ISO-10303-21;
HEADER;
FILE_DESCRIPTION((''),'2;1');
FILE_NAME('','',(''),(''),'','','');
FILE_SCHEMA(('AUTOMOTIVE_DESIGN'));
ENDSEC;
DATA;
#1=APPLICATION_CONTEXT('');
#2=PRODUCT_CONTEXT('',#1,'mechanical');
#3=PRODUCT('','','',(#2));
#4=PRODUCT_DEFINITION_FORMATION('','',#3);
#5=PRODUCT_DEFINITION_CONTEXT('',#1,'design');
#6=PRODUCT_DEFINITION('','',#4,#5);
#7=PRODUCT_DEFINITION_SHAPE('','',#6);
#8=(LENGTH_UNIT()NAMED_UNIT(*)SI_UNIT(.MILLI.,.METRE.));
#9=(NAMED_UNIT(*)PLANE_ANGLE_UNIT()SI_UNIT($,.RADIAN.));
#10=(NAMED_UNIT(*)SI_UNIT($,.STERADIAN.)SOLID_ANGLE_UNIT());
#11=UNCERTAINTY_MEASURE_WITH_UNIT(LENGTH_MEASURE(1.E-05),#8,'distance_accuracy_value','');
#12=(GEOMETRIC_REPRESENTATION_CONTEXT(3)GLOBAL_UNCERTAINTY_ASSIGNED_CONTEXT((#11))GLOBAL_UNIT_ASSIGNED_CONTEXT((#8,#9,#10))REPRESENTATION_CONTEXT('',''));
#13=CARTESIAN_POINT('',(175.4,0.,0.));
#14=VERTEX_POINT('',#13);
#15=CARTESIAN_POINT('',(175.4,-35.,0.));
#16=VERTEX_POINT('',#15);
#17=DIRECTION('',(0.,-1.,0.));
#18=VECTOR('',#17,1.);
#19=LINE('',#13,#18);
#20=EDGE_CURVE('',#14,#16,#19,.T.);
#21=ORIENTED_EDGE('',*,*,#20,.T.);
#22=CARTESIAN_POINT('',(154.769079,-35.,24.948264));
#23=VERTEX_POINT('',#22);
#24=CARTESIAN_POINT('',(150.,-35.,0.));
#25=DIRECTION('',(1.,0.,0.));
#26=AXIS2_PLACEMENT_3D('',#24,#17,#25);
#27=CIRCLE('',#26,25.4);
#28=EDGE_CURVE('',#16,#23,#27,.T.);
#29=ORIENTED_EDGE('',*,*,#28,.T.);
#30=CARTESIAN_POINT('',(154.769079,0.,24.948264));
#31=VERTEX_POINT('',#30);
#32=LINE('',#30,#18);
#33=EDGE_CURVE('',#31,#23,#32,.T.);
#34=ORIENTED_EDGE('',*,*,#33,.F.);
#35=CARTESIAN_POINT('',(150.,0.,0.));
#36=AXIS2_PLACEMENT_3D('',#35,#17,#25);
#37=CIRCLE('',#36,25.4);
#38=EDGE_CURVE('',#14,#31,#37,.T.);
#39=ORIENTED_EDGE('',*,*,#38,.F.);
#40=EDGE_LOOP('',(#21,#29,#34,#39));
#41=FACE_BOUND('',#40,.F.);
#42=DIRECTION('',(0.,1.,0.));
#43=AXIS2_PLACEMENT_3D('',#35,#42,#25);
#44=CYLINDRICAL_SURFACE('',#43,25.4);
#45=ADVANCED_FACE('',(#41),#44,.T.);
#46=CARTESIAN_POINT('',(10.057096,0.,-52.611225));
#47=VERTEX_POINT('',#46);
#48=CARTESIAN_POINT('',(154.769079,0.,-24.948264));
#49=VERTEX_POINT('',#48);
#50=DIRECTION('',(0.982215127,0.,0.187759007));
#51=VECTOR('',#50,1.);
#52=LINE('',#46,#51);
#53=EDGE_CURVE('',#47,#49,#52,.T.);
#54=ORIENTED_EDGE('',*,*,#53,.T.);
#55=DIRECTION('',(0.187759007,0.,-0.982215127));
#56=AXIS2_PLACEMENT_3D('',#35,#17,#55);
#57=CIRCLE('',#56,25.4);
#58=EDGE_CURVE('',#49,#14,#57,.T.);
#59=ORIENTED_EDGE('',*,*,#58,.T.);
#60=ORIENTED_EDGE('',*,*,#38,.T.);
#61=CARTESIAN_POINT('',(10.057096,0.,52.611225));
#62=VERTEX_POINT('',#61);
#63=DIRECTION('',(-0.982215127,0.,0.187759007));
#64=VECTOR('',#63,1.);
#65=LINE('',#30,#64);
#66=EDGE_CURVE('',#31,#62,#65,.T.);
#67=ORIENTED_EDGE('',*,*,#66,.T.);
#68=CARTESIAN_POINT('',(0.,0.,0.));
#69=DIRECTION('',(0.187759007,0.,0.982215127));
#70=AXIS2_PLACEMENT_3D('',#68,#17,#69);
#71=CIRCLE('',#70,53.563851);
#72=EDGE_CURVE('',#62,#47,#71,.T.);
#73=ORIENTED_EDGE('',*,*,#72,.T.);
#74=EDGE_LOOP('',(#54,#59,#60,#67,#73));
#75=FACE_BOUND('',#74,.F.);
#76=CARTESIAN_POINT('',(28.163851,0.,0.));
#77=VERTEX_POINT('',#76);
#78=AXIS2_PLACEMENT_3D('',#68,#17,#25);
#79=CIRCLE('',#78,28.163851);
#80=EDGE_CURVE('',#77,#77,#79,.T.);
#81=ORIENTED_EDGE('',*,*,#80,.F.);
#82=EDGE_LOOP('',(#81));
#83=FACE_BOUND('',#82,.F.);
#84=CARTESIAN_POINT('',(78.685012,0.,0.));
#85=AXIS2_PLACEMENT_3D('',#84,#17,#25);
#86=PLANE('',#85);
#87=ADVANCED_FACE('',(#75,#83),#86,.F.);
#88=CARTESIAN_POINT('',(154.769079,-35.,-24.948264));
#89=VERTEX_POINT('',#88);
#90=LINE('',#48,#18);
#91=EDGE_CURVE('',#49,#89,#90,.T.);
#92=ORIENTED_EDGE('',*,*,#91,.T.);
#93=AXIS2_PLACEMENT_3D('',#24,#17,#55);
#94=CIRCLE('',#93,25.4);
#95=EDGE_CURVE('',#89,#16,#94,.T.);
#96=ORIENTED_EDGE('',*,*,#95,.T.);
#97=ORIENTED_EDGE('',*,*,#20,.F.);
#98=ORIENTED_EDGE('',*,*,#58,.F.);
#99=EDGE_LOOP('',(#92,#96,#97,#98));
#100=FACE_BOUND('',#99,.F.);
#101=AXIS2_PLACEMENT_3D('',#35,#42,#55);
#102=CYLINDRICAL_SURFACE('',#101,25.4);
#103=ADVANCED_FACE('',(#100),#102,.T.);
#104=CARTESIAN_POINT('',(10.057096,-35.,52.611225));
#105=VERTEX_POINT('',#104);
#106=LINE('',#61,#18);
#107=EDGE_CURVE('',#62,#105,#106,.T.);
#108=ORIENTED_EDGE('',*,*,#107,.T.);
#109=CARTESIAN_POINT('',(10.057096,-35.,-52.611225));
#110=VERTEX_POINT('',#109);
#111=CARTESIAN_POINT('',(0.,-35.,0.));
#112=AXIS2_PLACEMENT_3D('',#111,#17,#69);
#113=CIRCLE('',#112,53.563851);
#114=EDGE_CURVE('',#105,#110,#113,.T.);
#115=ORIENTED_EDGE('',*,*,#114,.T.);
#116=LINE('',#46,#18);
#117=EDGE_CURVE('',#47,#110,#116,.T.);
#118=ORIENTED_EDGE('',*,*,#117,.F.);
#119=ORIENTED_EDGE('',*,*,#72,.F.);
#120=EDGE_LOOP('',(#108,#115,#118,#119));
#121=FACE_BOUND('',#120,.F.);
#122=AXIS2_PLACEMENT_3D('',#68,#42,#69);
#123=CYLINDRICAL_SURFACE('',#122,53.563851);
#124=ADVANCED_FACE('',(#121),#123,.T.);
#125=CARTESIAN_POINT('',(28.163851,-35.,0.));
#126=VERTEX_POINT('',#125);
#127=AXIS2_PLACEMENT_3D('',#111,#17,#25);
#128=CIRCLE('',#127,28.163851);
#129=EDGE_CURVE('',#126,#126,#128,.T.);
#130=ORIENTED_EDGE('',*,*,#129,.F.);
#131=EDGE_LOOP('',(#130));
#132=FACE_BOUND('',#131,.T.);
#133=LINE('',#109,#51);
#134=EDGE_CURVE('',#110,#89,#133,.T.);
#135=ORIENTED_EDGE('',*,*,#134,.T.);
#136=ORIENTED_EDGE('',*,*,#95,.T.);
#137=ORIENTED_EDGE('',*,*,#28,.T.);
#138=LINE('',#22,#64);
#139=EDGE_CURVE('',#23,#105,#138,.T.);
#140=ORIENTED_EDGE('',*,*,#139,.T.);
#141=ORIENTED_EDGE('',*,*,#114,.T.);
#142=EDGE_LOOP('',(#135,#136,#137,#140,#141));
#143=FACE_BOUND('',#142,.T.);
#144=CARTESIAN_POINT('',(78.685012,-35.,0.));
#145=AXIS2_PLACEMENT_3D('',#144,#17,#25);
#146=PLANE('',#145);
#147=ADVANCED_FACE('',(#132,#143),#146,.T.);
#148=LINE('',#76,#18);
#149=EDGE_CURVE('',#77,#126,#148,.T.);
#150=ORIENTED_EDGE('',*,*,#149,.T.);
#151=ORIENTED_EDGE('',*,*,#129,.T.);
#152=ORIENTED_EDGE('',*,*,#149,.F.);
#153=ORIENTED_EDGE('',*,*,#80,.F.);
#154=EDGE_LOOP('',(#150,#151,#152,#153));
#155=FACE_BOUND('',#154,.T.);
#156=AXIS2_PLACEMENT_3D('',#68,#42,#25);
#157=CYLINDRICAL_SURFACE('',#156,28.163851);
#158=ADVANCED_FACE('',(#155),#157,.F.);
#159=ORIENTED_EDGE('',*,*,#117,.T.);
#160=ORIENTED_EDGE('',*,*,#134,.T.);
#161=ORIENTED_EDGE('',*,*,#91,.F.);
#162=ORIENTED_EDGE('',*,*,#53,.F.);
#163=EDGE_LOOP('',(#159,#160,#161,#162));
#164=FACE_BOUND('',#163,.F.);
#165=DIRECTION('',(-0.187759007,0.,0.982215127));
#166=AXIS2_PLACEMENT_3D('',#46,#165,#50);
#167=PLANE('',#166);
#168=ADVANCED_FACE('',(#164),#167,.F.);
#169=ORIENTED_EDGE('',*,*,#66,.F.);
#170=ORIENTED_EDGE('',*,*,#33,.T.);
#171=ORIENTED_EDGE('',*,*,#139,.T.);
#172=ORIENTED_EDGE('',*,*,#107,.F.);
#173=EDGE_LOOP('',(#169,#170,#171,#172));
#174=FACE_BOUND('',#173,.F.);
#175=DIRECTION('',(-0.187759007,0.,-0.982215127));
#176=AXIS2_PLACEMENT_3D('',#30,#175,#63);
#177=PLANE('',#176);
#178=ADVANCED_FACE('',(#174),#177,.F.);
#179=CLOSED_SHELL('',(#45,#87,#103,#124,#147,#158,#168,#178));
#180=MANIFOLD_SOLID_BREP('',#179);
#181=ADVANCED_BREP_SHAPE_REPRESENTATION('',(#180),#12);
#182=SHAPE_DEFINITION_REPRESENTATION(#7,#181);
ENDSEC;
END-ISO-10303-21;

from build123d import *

# Parameters (mm, degrees)
F0_R     = 28.1638511083
F1_DEPTH = 35


# Not quite as in the source:
# - the program builds the solid bodies; features that only make, move or delete a surface that nothing else refers to are left out


with BuildPart() as f1:
    # F0 (on Front) → F1 (new body)
    with BuildSketch(Plane.XZ):
        with BuildLine():
            ThreePointArc((10.057095516, 52.6112248036), (41.2782201188, 34.1349482111), (53.5638511083, 0))
            ThreePointArc((53.5638511083, 0), (41.2782201188, -34.1349482111), (10.057095516, -52.6112248036))
            Line((10.057095516, -52.6112248036), (154.7690787877, -24.9482642185))
            ThreePointArc((154.7690787877, -24.9482642185), (124.6, 0), (154.7690787877, 24.9482642185))
            Line((154.7690787877, 24.9482642185), (10.057095516, 52.6112248036))
        make_face()
        with BuildLine():
            ThreePointArc((10.057095516, -52.6112248036), (41.2782201188, -34.1349482111), (53.5638511083, 0))
            ThreePointArc((53.5638511083, 0), (41.2782201188, 34.1349482111), (10.057095516, 52.6112248036))
            ThreePointArc((10.057095516, 52.6112248036), (-53.5638511083, 0), (10.057095516, -52.6112248036))
        make_face()
        Circle(F0_R, mode=Mode.SUBTRACT)
        with BuildLine():
            ThreePointArc((175.4, 0), (169.5741487836, 16.1868063372), (154.7690787877, 24.9482642185))
            ThreePointArc((154.7690787877, 24.9482642185), (124.6, 0), (154.7690787877, -24.9482642185))
            ThreePointArc((154.7690787877, -24.9482642185), (169.5741487836, -16.1868063372), (175.4, 0))
        make_face()
    extrude(amount=F1_DEPTH)


solid = f1.part
